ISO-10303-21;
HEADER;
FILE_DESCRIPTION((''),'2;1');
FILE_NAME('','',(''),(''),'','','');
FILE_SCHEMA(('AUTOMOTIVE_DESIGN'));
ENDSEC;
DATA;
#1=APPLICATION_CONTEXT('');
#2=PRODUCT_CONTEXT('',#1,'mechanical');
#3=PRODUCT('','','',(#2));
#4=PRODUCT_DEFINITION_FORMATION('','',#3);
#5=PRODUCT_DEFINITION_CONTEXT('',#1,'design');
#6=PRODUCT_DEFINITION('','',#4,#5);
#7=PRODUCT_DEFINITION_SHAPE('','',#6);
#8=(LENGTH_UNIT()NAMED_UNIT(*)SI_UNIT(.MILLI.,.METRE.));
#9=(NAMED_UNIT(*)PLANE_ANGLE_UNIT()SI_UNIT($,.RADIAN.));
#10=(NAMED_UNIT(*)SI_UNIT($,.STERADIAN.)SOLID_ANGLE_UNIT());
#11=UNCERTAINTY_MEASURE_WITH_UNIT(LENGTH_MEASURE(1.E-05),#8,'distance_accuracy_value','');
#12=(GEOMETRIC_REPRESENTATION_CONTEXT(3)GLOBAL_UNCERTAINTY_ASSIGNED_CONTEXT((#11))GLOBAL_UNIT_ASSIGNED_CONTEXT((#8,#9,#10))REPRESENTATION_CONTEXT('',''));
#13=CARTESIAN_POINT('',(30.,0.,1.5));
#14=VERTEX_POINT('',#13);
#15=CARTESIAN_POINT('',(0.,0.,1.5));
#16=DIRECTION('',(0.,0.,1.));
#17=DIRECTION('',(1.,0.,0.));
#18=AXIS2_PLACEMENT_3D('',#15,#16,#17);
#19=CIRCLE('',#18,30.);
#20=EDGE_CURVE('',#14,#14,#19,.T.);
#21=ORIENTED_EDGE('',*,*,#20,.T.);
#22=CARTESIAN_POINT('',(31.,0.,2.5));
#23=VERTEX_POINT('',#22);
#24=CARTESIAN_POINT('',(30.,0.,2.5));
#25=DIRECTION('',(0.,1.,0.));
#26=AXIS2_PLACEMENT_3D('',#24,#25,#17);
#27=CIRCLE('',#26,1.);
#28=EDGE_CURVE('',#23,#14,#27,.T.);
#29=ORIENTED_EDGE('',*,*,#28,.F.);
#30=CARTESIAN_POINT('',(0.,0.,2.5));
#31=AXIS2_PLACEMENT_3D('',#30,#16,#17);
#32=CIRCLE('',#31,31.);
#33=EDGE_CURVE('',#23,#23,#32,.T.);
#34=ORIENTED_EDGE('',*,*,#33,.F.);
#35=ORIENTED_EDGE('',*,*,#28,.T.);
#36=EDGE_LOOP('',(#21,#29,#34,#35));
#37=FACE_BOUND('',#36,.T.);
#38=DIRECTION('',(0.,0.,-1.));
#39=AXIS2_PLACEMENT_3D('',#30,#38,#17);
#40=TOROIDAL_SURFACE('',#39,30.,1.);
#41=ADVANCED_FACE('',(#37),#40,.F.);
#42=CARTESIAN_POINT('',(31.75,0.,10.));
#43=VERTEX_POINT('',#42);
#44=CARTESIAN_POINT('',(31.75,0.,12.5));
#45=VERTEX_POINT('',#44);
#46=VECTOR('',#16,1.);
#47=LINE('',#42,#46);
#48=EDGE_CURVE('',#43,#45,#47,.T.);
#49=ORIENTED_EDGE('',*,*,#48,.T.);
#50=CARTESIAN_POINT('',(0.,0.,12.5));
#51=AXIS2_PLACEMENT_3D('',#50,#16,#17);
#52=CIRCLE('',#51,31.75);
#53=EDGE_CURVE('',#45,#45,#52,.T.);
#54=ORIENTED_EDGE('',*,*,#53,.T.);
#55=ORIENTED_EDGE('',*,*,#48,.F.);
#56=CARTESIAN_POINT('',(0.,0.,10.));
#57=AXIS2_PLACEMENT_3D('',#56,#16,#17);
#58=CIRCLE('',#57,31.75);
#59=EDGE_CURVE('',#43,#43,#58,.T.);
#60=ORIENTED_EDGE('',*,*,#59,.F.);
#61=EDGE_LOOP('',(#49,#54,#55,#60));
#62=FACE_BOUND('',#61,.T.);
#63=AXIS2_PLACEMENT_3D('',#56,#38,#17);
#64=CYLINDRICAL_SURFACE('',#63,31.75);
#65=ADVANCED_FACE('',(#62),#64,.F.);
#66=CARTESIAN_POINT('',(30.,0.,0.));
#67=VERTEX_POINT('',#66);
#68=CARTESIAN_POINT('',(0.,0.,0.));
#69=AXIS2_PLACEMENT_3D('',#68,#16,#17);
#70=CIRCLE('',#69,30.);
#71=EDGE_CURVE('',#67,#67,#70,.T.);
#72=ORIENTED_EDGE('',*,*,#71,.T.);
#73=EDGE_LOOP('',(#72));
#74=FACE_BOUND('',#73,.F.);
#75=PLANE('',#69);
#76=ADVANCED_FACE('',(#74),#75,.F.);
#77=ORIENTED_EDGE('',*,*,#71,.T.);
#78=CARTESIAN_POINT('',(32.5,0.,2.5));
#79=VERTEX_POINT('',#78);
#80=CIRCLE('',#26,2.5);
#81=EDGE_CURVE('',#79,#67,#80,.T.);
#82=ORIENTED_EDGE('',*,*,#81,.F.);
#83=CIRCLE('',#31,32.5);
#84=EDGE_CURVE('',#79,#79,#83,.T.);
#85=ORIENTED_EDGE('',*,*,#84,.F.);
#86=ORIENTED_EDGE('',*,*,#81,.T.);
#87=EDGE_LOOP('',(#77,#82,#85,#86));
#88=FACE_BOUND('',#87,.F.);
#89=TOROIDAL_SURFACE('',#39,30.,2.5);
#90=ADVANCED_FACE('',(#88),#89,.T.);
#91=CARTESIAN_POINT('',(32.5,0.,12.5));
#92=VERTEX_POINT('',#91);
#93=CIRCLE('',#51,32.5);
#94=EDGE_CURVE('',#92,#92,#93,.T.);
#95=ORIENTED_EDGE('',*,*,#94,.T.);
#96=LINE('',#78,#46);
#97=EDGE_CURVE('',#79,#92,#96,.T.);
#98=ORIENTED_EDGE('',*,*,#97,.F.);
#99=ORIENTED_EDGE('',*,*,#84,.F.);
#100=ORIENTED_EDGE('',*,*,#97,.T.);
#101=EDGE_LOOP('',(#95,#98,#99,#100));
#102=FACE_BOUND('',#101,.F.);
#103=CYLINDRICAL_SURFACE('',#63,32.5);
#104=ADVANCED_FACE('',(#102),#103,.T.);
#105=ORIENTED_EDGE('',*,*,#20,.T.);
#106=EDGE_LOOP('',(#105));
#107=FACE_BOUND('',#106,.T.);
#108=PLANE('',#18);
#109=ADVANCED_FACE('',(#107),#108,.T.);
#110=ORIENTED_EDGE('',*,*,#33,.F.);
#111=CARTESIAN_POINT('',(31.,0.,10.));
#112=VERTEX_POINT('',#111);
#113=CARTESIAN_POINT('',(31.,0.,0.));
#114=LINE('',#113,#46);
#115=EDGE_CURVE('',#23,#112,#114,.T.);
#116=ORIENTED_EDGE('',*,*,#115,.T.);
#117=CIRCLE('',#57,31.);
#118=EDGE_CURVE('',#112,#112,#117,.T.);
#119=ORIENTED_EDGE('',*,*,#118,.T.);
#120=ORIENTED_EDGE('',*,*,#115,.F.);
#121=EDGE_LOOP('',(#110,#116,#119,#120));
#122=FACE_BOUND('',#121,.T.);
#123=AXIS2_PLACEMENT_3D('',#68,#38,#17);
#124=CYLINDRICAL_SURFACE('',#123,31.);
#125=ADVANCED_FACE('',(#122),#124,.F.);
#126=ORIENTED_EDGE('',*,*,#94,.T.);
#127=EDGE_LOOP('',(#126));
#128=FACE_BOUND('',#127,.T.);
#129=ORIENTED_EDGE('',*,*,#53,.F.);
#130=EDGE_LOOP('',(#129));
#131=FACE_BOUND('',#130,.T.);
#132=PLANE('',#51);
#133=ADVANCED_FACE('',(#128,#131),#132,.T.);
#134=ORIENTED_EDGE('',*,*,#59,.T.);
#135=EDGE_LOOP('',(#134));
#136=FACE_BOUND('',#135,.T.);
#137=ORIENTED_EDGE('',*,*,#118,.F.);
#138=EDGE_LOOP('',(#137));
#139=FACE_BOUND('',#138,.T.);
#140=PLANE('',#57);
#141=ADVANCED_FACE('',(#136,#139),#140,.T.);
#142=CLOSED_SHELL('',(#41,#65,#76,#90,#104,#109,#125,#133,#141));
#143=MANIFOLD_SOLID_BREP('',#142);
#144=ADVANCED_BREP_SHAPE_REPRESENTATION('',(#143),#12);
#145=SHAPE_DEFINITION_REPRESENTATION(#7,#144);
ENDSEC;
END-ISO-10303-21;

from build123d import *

# Parameters (mm, degrees)
F0_R     = 32.5
F1_DEPTH = 10
F2_R     = 2.5
F3_T     = -1.5
F4_R     = 32.5
F4_R_2   = 31.75
F5_DEPTH = 2.5


# Not quite as in the source:
# - a feature names something its author has since deleted; it is built from what else it names


with BuildPart() as f1:
    # F0 (on Top) → F1 (new body)
    with BuildSketch(Plane.XY):
        Circle(F0_R)
    extrude(amount=F1_DEPTH)

    # F2
    f2_edges = [f1.edges().sort_by_distance(p)[0] for p in [
        (-32.5, 0, 0),
    ]]
    fillet(f2_edges, radius=F2_R)

    # F3
    f3_openings = [f1.faces().sort_by_distance(p)[0] for p in [
        (0, 0, 10),
    ]]
    offset(amount=F3_T, openings=f3_openings)

    # F4 (on face) → F5 (join)
    with BuildSketch(Plane.XY.offset(10)):
        Circle(F4_R)
        Circle(F4_R_2, mode=Mode.SUBTRACT)
    extrude(amount=F5_DEPTH)


solid = f1.part
